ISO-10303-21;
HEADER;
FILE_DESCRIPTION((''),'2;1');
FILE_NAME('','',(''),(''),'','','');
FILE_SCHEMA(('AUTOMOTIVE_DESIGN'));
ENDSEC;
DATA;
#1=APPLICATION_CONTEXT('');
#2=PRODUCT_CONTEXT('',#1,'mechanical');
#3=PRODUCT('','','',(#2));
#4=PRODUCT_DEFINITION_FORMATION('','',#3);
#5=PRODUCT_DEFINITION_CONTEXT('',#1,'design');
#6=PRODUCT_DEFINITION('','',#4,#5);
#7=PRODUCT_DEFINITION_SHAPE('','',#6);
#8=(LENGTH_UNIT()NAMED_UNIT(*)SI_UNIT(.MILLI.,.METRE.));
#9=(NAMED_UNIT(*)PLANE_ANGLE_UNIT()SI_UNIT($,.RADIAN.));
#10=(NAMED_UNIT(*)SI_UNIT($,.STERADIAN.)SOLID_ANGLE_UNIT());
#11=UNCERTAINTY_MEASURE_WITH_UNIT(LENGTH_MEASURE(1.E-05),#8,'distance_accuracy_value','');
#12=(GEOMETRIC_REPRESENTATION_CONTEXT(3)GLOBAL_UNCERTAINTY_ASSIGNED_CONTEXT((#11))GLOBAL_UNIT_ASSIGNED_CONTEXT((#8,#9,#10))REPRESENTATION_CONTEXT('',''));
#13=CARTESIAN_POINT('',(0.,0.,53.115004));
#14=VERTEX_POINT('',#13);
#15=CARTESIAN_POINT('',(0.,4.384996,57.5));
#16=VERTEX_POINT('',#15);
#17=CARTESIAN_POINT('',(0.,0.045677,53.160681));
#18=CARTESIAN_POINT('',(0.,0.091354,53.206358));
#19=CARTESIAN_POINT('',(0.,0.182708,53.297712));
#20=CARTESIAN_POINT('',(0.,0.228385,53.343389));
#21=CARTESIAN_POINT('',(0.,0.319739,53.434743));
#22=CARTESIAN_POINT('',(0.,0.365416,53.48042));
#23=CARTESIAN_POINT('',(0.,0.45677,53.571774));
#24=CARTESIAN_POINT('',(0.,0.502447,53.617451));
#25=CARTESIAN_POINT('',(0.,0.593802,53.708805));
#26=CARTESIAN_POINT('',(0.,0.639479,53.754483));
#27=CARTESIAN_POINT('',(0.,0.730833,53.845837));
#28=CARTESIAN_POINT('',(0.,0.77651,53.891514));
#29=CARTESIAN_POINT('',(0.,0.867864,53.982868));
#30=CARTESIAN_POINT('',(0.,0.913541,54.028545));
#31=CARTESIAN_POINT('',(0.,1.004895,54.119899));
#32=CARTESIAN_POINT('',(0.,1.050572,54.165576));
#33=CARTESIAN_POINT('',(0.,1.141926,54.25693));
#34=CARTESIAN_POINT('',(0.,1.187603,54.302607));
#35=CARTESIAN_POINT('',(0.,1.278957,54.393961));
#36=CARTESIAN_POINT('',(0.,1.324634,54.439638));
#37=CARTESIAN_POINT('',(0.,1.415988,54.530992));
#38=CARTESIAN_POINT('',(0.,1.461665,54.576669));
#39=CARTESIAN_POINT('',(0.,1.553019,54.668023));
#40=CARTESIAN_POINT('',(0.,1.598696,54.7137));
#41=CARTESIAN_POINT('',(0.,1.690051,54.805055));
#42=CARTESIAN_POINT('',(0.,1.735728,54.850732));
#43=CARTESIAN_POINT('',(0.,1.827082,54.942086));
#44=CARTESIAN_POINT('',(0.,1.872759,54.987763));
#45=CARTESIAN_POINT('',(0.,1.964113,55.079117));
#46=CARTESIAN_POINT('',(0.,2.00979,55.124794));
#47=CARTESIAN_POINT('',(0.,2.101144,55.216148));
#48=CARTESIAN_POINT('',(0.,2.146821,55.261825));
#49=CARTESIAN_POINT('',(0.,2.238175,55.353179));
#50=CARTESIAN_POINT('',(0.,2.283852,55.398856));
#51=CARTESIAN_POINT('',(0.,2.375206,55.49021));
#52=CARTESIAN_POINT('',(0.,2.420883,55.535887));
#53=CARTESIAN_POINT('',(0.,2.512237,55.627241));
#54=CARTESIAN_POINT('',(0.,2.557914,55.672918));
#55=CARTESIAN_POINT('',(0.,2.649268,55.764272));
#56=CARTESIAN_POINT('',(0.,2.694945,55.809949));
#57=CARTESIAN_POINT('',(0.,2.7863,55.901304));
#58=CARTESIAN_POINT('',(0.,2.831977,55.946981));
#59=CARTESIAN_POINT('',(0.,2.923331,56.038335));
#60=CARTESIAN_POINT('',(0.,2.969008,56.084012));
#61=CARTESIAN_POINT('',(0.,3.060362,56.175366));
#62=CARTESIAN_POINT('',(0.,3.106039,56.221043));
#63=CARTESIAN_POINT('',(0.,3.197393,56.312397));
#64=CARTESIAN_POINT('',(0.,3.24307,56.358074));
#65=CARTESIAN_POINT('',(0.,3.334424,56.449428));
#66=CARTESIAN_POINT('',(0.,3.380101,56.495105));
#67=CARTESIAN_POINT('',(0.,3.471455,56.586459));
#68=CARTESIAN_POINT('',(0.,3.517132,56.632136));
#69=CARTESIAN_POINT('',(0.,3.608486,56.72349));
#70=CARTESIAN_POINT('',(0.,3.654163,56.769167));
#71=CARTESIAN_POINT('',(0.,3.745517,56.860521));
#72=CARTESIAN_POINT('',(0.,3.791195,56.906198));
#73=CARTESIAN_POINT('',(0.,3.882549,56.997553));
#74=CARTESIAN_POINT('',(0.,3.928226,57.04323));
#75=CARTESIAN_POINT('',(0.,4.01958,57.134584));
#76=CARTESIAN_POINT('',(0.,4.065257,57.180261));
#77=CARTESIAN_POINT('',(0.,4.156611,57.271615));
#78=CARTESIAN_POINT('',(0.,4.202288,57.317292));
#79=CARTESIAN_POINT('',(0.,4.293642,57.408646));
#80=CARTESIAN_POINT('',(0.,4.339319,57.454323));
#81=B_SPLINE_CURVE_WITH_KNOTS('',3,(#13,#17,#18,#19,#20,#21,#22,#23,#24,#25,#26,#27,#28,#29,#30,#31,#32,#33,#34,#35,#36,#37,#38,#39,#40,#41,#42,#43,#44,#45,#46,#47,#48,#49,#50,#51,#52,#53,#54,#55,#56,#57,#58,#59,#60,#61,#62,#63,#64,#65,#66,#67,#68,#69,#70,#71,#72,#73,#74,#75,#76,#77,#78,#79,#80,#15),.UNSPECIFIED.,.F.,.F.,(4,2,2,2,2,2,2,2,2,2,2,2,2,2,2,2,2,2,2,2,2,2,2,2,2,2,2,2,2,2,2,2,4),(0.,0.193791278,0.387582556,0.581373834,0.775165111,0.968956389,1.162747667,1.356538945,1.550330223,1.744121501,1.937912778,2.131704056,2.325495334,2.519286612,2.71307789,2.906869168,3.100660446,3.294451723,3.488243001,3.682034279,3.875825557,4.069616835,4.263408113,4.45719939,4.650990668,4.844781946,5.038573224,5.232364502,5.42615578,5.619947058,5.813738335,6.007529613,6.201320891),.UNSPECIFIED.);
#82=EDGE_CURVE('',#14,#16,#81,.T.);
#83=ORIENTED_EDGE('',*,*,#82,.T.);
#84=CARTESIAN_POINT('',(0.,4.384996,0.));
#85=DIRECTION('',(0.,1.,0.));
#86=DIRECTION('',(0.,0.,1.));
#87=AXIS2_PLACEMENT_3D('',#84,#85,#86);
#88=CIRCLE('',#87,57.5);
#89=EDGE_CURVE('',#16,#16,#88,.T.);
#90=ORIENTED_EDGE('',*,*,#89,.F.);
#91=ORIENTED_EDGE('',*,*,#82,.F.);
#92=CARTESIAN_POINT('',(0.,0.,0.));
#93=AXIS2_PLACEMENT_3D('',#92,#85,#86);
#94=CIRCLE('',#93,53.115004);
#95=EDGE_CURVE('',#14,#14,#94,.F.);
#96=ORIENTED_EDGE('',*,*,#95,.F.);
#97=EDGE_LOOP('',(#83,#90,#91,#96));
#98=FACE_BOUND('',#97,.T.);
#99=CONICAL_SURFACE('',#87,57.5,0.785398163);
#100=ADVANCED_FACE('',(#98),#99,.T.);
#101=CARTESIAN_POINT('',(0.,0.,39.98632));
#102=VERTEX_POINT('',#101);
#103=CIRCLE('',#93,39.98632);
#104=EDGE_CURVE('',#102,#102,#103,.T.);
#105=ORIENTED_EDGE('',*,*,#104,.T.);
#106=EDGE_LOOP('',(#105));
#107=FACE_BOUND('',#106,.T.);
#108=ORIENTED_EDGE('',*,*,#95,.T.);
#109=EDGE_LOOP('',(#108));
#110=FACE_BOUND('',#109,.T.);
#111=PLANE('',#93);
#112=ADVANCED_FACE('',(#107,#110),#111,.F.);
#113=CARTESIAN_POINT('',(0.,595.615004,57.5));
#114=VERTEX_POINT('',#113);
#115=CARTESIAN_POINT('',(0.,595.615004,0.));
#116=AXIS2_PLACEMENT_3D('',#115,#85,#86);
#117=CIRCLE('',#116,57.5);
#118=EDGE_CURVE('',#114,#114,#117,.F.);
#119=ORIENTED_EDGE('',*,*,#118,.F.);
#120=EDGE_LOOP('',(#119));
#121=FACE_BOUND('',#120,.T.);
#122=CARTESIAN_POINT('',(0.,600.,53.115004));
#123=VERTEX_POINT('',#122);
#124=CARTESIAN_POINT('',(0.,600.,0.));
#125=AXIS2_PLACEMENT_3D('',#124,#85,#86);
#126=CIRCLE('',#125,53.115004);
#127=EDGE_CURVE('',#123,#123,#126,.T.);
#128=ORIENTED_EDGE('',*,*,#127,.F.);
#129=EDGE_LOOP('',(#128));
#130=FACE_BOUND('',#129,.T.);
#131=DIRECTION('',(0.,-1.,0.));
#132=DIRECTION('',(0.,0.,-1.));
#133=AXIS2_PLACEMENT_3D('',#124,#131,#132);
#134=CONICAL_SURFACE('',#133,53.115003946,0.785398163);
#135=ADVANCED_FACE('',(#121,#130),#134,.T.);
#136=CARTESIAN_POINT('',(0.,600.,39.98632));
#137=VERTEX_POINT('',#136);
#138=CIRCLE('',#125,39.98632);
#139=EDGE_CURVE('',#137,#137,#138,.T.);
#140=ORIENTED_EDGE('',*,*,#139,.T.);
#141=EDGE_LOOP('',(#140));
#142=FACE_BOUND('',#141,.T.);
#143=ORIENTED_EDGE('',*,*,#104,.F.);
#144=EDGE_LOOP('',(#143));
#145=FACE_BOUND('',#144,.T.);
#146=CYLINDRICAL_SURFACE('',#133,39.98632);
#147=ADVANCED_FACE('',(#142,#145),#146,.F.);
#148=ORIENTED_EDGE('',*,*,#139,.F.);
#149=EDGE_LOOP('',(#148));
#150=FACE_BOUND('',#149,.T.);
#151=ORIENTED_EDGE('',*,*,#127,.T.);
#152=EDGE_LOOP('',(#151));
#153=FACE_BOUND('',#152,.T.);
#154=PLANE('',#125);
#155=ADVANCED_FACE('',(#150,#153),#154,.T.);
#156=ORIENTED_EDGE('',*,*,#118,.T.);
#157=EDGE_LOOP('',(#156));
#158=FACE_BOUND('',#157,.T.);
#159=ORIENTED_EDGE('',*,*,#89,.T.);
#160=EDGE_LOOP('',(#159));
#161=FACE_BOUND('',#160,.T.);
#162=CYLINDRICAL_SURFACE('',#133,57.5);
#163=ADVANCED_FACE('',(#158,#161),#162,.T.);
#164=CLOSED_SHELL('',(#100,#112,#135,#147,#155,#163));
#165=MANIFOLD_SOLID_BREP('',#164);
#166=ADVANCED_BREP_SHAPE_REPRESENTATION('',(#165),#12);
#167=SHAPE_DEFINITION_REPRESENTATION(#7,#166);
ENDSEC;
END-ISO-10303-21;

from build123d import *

# Parameters (mm, degrees)
SKETCH1_R           = 57.5
BOSS_EXTRUDE1_DEPTH = 600
SKETCH2_R           = 39.986320137
CUT_EXTRUDE1_DEPTH  = 606.485342515
CHAMFER1_SIZE       = 4.384996054


with BuildPart() as part:
    # Sketch1 → Boss-Extrude1 (new body)
    with BuildSketch(Plane(origin=(0, 0, 0), x_dir=(1, 0, 0), z_dir=(0, 1, 0))):
        Circle(SKETCH1_R)
    extrude(amount=BOSS_EXTRUDE1_DEPTH)

    # Sketch2 → Cut-Extrude1 (cut, through all)
    with BuildSketch(Plane(origin=(0, 0, 0), x_dir=(1, 0, 0), z_dir=(0, 1, 0))):
        Circle(SKETCH2_R)
    extrude(amount=CUT_EXTRUDE1_DEPTH, mode=Mode.SUBTRACT)

    # Chamfer1
    chamfer1_edges = [part.edges().sort_by_distance(p)[0] for p in [
        (-57.5, 600, 0),
        (-57.5, 0, 0),
    ]]
    chamfer(chamfer1_edges, length=CHAMFER1_SIZE)


solid = part.part
